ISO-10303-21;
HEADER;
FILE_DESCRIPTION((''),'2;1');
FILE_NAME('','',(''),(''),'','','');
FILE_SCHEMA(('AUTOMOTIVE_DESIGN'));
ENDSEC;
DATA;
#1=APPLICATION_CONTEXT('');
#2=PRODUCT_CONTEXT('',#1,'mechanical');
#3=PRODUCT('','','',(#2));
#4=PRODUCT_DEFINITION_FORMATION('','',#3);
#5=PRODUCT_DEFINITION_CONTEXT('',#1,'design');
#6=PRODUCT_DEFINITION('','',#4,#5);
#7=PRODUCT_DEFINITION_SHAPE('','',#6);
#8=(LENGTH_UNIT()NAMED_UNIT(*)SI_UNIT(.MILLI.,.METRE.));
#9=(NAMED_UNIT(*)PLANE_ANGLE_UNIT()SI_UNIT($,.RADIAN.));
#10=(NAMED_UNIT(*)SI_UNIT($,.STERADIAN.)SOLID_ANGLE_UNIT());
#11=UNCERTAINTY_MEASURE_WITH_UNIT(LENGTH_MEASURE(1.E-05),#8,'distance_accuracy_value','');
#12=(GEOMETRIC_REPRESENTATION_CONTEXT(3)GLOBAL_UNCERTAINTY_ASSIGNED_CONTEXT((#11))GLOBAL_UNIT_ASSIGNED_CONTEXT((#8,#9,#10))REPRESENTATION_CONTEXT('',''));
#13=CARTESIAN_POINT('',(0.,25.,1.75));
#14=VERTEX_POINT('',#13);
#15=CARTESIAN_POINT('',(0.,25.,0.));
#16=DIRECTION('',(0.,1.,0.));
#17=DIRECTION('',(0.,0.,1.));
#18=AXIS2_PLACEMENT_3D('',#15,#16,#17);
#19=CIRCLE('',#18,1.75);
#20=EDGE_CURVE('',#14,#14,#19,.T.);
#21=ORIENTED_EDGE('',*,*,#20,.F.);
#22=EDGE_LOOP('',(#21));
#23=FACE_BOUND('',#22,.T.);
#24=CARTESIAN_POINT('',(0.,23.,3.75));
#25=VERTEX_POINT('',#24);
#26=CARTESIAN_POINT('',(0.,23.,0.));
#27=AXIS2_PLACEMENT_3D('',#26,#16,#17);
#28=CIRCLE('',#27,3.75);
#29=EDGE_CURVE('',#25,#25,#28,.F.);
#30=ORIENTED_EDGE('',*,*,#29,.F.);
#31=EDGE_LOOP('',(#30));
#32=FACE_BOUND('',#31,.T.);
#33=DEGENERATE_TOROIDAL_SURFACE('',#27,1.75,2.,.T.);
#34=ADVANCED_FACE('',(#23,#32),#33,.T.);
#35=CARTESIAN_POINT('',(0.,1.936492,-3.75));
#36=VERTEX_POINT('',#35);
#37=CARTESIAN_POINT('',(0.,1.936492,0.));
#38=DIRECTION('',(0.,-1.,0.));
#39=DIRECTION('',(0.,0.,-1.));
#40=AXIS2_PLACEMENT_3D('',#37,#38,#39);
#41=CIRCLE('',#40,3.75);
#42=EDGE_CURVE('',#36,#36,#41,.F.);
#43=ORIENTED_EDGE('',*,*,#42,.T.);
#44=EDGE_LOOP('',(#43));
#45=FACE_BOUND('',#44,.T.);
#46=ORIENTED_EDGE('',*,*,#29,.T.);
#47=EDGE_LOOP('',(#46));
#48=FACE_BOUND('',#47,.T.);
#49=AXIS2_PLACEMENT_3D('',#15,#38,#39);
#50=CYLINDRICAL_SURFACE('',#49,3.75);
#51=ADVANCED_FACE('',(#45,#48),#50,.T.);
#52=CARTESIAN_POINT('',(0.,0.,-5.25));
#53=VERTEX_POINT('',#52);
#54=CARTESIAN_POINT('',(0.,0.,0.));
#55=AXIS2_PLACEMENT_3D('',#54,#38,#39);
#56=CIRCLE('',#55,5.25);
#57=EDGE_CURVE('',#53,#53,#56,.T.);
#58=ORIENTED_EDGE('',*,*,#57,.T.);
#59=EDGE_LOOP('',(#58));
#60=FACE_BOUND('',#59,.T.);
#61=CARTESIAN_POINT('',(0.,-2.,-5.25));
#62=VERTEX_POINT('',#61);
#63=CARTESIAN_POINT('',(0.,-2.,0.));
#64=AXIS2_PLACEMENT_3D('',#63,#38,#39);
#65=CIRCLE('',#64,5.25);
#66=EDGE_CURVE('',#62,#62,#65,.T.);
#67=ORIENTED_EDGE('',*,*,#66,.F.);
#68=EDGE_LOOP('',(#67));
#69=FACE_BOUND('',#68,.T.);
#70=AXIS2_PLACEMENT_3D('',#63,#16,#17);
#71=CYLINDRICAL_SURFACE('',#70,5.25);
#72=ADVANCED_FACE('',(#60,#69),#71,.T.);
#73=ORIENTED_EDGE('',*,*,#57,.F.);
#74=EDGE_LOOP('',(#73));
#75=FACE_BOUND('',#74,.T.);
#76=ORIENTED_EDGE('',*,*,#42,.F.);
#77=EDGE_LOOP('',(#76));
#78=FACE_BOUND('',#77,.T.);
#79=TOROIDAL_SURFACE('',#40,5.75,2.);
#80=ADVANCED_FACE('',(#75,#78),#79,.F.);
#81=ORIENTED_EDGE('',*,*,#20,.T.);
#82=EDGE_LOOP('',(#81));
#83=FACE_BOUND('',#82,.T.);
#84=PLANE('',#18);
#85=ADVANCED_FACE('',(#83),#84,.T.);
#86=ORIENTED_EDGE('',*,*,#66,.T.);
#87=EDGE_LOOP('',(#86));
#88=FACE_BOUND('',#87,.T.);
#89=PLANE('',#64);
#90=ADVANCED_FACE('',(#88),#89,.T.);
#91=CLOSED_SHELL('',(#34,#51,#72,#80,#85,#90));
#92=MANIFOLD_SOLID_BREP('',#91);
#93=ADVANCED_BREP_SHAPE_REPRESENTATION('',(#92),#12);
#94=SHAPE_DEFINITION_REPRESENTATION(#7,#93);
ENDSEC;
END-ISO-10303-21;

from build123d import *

# Parameters (mm, degrees)
SKETCH1_R           = 3.75
BOSS_EXTRUDE1_DEPTH = 25
FILLET1_R           = 2
SKETCH2_R           = 5.25
BOSS_EXTRUDE2_DEPTH = 2
FILLET2_R           = 2


with BuildPart() as part:
    # Sketch1 → Boss-Extrude1 (new body)
    with BuildSketch(Plane(origin=(0, 0, 0), x_dir=(1, 0, 0), z_dir=(0, 1, 0))):
        with Locations(Location((0, 0, 0), (0, 0, 270))):
            Circle(SKETCH1_R)
    extrude(amount=BOSS_EXTRUDE1_DEPTH)

    # Fillet1
    fillet1_edges = [part.edges().sort_by_distance(p)[0] for p in [
        (0, 25, -3.75),
    ]]
    fillet(fillet1_edges, radius=FILLET1_R)

    # Sketch2 → Boss-Extrude2 (add)
    with BuildSketch(Plane.XZ):
        with Locations(Location((0, 0, 0), (0, 0, 270))):
            Circle(SKETCH2_R)
    extrude(amount=BOSS_EXTRUDE2_DEPTH)

    # Fillet2
    # the kernel refuses this fillet: 2 mm, written as the material it adds along each edge
    with BuildSketch(Plane(origin=(0, 0, 0), x_dir=(0, 0, 1), z_dir=(-1, 0, 0))) as fillet2_piece_1:
        with BuildLine():
            CenterArc((5.75, 1.936491673), FILLET2_R, 180, 75.522487814)
            Line((3.75, 1.936491673), (3.71, 1.936491673))
            Line((3.71, 1.936491673), (3.71, 0))
            Line((3.71, 0), (3.75, -0.04))
            ThreePointArc((3.75, -0.04), (4.5, -0.04), (5.24, -0.038729833))
            Line((5.24, -0.038729833), (5.25, 0))
        make_face()
    revolve(axis=Axis((0, 0, 0), (0, 1, 0)))


solid = part.part
